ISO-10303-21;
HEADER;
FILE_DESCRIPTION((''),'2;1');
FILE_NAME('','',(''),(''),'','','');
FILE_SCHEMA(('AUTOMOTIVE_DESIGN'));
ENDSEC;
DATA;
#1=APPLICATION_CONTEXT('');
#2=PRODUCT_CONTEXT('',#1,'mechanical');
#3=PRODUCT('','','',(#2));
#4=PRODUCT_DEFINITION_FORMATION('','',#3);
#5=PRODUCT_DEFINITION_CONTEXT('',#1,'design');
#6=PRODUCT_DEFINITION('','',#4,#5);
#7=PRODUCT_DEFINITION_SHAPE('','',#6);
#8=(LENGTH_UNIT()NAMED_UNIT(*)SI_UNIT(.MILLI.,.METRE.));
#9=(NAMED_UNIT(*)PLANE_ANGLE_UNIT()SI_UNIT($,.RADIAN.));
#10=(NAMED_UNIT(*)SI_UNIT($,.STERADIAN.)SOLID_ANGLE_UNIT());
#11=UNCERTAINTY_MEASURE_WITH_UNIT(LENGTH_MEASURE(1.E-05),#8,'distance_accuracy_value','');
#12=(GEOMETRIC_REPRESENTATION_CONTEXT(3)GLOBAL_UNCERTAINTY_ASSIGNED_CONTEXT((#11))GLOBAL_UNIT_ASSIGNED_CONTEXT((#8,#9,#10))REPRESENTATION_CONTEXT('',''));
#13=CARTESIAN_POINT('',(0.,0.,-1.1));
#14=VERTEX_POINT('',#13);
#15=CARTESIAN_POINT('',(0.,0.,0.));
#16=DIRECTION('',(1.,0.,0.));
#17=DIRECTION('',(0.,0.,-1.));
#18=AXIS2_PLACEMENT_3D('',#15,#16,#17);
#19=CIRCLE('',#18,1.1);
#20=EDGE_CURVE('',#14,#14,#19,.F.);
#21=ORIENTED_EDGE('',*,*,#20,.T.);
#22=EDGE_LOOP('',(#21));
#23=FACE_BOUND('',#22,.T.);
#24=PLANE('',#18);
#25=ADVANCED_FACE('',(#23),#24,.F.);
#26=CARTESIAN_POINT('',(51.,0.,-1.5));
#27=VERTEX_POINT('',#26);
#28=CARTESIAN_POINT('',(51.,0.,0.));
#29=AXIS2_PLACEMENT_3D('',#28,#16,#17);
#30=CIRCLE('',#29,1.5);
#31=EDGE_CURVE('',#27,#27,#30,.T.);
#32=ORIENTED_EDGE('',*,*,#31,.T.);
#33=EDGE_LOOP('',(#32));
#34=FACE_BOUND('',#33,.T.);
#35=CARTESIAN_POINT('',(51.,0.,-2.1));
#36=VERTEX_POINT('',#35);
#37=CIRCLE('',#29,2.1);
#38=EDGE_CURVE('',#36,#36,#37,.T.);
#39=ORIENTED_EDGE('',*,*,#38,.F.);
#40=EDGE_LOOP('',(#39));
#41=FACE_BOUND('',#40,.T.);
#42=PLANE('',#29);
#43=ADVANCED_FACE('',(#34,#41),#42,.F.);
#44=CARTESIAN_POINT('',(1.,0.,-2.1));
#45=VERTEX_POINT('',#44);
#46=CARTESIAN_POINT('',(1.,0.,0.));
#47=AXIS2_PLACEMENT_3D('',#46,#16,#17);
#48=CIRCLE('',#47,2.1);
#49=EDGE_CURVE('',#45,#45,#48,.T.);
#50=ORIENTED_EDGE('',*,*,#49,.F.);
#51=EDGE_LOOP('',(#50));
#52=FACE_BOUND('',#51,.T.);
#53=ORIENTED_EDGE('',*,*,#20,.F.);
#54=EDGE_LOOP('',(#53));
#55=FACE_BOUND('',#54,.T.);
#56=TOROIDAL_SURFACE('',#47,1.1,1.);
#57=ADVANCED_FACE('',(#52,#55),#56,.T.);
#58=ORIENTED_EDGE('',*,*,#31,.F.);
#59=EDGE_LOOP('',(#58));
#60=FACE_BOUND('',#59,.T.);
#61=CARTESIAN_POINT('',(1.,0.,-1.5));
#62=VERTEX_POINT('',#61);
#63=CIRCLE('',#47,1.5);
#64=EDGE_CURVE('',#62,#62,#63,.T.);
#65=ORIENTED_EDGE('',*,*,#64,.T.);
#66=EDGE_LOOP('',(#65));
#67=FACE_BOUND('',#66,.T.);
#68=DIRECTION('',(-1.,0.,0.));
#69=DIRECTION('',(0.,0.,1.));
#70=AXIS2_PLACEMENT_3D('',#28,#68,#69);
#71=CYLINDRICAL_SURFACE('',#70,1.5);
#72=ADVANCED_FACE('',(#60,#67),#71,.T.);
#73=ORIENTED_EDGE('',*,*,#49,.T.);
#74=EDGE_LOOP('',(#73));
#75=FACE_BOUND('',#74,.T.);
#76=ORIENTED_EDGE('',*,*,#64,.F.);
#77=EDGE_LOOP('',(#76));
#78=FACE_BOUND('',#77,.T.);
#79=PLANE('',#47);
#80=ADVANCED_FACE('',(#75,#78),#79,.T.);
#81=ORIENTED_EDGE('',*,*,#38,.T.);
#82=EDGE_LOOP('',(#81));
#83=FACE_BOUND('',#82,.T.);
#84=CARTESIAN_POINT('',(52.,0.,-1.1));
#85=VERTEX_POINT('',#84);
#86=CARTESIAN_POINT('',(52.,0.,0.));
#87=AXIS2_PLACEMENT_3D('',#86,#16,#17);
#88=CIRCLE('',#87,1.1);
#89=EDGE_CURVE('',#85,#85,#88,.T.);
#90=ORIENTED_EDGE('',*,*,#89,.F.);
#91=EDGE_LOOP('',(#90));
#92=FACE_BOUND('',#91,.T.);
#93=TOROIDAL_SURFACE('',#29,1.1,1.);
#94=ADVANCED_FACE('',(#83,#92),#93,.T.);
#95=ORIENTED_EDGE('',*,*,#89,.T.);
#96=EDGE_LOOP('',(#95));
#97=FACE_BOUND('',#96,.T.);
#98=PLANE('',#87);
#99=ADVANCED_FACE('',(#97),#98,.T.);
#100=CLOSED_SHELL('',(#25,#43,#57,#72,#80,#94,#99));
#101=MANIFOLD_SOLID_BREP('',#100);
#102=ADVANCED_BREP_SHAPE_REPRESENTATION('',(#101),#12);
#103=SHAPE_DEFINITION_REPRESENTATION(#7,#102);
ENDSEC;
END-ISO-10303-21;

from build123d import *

# Parameters (mm, degrees)
SKETCH1_R           = 2.1
BOSS_EXTRUDE1_DEPTH = 1
SKETCH2_R           = 1.5
BOSS_EXTRUDE2_DEPTH = 50
SKETCH3_R           = 2.1
BOSS_EXTRUDE3_DEPTH = 1
FILLET1_R           = 1


with BuildPart() as part:
    # Sketch1 → Boss-Extrude1 (new body)
    with BuildSketch(Plane(origin=(0, 0, 0), x_dir=(0, 0, -1), z_dir=(1, 0, 0))):
        Circle(SKETCH1_R)
    extrude(amount=BOSS_EXTRUDE1_DEPTH)

    # Sketch2 → Boss-Extrude2 (add)
    with BuildSketch(Plane(origin=(1, 0, 0), x_dir=(0, 0, -1), z_dir=(1, 0, 0))):
        Circle(SKETCH2_R)
    extrude(amount=BOSS_EXTRUDE2_DEPTH)

    # Sketch3 → Boss-Extrude3 (add)
    with BuildSketch(Plane(origin=(51, 0, 0), x_dir=(0, 0, -1), z_dir=(1, 0, 0))):
        Circle(SKETCH3_R)
    extrude(amount=BOSS_EXTRUDE3_DEPTH)

    # Fillet1
    fillet1_edges = [part.edges().sort_by_distance(p)[0] for p in [
        (0, 0, 2.1),
        (52, 0, 2.1),
    ]]
    fillet(fillet1_edges, radius=FILLET1_R - 0.0001)  # a hair under: the kernel refuses the full size


solid = part.part
